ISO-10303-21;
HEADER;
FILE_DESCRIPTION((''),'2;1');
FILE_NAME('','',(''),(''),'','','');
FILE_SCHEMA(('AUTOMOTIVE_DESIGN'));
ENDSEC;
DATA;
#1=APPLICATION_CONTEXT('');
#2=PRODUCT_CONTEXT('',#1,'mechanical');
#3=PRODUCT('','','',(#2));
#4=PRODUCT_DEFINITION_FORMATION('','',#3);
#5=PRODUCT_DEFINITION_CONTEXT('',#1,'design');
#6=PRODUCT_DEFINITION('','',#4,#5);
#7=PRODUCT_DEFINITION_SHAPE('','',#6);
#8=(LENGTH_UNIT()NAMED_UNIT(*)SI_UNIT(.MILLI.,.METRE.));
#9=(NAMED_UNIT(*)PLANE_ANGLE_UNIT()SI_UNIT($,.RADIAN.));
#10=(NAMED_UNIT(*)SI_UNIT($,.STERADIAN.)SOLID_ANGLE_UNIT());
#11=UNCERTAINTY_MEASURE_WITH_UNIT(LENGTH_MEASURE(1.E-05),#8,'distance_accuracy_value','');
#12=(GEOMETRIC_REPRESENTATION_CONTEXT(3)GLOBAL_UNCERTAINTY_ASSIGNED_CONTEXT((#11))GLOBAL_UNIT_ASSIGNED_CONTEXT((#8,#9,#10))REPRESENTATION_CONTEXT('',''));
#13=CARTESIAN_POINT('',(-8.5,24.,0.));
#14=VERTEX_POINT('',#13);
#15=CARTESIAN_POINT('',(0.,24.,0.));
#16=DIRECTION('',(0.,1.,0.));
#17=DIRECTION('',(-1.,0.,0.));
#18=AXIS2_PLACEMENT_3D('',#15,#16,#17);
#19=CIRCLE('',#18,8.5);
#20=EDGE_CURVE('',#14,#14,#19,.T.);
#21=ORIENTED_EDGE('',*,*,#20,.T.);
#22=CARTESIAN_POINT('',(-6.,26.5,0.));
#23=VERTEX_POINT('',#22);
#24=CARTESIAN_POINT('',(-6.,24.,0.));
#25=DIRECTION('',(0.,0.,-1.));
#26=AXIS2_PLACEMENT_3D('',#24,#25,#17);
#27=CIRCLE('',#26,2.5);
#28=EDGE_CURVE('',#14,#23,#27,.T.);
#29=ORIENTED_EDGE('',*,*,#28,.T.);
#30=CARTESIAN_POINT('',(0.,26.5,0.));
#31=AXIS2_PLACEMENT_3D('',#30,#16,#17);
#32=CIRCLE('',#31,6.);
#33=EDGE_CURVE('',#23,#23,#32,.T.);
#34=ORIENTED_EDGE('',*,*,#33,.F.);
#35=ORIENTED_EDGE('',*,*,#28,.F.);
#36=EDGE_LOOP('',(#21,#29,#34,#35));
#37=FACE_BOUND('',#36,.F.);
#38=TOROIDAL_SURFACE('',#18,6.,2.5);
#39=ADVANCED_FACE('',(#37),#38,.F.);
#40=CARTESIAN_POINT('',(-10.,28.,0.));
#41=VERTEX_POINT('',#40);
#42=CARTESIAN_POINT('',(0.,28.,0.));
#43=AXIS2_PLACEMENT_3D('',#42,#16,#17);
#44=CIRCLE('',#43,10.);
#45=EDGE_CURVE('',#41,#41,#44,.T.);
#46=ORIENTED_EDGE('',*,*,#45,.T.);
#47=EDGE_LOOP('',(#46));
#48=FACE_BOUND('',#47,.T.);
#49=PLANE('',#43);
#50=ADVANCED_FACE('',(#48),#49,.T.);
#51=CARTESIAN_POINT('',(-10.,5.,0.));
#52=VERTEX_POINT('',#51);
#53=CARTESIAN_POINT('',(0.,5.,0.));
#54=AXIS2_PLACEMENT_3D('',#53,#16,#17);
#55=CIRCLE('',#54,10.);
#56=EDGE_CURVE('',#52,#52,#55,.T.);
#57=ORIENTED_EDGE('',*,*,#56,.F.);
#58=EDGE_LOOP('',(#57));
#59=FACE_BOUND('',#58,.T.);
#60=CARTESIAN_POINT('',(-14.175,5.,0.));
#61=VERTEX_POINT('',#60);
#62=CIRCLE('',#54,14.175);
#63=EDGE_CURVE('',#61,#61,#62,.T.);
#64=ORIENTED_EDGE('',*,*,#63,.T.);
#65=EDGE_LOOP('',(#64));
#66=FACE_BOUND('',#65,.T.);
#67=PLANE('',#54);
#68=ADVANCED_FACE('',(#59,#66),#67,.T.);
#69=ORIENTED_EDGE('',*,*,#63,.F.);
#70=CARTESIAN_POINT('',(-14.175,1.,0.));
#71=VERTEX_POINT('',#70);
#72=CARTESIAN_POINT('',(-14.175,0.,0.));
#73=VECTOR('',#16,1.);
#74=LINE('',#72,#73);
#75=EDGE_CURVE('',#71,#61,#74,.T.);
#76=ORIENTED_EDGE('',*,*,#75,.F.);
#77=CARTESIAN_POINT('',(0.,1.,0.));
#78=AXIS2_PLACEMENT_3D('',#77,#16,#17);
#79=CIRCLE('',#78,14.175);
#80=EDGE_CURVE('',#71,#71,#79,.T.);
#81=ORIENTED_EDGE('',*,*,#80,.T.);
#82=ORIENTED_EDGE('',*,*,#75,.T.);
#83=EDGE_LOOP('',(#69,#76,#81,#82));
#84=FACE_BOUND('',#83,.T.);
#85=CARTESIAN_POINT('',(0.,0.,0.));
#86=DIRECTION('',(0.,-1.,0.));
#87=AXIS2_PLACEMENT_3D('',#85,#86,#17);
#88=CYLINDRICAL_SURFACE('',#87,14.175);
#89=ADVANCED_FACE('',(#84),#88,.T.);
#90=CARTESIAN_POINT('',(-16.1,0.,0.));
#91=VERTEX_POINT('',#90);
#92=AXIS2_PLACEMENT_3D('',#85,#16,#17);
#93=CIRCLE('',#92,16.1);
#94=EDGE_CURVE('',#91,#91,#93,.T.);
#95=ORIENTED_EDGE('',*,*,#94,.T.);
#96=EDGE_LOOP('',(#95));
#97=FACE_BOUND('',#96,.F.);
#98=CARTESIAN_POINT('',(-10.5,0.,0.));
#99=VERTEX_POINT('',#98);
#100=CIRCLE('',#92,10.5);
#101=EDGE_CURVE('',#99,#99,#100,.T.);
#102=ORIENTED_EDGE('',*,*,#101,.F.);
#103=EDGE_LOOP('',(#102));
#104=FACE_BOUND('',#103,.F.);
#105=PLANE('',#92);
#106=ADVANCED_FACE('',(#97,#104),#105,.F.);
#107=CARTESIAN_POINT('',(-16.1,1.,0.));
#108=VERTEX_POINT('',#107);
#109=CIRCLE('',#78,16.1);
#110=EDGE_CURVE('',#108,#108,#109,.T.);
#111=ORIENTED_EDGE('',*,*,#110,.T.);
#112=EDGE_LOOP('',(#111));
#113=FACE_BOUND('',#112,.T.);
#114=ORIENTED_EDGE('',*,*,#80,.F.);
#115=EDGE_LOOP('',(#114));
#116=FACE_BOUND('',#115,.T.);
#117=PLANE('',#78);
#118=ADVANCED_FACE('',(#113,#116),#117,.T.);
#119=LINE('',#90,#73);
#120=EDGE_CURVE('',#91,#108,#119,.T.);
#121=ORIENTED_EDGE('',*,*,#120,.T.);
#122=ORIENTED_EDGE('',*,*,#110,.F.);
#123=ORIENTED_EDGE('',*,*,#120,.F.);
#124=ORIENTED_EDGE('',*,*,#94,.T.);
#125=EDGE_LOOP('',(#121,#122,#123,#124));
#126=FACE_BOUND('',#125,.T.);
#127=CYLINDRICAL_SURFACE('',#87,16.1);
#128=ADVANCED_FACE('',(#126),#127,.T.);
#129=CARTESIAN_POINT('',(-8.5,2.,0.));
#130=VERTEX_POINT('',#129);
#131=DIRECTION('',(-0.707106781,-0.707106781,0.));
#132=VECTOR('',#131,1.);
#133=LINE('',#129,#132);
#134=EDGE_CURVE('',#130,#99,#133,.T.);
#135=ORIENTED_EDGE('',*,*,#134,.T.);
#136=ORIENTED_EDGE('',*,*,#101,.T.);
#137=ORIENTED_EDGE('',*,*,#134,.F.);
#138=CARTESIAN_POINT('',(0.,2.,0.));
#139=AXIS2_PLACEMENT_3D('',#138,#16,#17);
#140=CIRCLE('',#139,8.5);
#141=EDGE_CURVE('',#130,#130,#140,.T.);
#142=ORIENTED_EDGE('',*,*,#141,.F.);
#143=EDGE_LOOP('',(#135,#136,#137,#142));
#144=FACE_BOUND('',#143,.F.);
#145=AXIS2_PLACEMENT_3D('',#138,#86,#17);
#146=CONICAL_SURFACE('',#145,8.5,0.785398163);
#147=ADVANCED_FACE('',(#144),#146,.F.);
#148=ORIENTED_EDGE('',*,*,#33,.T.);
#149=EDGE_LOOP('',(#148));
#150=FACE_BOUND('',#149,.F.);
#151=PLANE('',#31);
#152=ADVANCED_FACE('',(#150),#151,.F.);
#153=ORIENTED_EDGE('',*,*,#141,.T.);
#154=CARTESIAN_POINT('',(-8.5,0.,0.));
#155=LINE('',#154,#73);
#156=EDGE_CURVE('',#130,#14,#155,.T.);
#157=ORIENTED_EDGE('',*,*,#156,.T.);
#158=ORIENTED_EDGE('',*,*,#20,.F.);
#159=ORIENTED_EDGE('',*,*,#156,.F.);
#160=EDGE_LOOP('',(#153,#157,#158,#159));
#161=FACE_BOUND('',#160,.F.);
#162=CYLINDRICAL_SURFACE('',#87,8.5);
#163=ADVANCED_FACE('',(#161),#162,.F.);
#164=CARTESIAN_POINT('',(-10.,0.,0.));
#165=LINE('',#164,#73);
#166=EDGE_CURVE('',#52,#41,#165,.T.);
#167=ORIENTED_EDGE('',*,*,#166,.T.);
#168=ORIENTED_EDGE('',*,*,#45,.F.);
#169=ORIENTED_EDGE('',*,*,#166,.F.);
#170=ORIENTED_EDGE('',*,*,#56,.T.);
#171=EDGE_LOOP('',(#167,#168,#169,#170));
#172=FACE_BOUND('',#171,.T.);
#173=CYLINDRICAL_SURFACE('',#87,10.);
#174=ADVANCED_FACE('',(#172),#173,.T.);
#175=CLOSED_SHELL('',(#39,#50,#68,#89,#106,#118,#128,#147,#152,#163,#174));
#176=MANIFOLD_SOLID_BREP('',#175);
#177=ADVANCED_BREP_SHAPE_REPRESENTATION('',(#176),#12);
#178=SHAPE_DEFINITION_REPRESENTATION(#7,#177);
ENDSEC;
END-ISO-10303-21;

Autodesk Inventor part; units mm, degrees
ref_plane "YZ Plane" through (0, 0, 0) normal (1, 0, 0) x (0, 1, 0)
ref_plane "XZ Plane" through (0, 0, 0) normal (0, 1, 0) x (-1, 0, 0)
ref_plane "XY Plane" through (0, 0, 0) normal (0, 0, 1) x (1, 0, 0)
sketch "Náčrt1" plane through (0, 0, 0) normal (0, 1, 0) x (-1, 0, 0)
  circle A0 centre (0, 0) radius 16.1
  circle A1 centre (0, 0) radius 14.175
  circle A2 centre (0, 0) radius 10
  circle A3 centre (0, 0) radius 8.5
  dimension "d0" = 32.2
  dimension "d1" = 28.35
  dimension "d2" = 20
  dimension "d3" = 1.5
extrude "Vysunutí1" add sketch "Náčrt1" along normal blind 1 contours A0
extrude "Vysunutí2" add sketch "Náčrt1" along normal blind 5 contours A1
extrude "Vysunutí3" add sketch "Náčrt1" along normal blind 28 contours A2 | A3
extrude "Vysunutí4" cut sketch "Náčrt1" along normal blind 26.5 contours A3
fillet "Zaoblení1" radius 2.5 1 edges at (8.5, 26.5, 0)
chamfer "Zkosení1" distance 2 angle 45 1 edges at (8.5, 0, 0)
properties part number "D28 - Forma"
